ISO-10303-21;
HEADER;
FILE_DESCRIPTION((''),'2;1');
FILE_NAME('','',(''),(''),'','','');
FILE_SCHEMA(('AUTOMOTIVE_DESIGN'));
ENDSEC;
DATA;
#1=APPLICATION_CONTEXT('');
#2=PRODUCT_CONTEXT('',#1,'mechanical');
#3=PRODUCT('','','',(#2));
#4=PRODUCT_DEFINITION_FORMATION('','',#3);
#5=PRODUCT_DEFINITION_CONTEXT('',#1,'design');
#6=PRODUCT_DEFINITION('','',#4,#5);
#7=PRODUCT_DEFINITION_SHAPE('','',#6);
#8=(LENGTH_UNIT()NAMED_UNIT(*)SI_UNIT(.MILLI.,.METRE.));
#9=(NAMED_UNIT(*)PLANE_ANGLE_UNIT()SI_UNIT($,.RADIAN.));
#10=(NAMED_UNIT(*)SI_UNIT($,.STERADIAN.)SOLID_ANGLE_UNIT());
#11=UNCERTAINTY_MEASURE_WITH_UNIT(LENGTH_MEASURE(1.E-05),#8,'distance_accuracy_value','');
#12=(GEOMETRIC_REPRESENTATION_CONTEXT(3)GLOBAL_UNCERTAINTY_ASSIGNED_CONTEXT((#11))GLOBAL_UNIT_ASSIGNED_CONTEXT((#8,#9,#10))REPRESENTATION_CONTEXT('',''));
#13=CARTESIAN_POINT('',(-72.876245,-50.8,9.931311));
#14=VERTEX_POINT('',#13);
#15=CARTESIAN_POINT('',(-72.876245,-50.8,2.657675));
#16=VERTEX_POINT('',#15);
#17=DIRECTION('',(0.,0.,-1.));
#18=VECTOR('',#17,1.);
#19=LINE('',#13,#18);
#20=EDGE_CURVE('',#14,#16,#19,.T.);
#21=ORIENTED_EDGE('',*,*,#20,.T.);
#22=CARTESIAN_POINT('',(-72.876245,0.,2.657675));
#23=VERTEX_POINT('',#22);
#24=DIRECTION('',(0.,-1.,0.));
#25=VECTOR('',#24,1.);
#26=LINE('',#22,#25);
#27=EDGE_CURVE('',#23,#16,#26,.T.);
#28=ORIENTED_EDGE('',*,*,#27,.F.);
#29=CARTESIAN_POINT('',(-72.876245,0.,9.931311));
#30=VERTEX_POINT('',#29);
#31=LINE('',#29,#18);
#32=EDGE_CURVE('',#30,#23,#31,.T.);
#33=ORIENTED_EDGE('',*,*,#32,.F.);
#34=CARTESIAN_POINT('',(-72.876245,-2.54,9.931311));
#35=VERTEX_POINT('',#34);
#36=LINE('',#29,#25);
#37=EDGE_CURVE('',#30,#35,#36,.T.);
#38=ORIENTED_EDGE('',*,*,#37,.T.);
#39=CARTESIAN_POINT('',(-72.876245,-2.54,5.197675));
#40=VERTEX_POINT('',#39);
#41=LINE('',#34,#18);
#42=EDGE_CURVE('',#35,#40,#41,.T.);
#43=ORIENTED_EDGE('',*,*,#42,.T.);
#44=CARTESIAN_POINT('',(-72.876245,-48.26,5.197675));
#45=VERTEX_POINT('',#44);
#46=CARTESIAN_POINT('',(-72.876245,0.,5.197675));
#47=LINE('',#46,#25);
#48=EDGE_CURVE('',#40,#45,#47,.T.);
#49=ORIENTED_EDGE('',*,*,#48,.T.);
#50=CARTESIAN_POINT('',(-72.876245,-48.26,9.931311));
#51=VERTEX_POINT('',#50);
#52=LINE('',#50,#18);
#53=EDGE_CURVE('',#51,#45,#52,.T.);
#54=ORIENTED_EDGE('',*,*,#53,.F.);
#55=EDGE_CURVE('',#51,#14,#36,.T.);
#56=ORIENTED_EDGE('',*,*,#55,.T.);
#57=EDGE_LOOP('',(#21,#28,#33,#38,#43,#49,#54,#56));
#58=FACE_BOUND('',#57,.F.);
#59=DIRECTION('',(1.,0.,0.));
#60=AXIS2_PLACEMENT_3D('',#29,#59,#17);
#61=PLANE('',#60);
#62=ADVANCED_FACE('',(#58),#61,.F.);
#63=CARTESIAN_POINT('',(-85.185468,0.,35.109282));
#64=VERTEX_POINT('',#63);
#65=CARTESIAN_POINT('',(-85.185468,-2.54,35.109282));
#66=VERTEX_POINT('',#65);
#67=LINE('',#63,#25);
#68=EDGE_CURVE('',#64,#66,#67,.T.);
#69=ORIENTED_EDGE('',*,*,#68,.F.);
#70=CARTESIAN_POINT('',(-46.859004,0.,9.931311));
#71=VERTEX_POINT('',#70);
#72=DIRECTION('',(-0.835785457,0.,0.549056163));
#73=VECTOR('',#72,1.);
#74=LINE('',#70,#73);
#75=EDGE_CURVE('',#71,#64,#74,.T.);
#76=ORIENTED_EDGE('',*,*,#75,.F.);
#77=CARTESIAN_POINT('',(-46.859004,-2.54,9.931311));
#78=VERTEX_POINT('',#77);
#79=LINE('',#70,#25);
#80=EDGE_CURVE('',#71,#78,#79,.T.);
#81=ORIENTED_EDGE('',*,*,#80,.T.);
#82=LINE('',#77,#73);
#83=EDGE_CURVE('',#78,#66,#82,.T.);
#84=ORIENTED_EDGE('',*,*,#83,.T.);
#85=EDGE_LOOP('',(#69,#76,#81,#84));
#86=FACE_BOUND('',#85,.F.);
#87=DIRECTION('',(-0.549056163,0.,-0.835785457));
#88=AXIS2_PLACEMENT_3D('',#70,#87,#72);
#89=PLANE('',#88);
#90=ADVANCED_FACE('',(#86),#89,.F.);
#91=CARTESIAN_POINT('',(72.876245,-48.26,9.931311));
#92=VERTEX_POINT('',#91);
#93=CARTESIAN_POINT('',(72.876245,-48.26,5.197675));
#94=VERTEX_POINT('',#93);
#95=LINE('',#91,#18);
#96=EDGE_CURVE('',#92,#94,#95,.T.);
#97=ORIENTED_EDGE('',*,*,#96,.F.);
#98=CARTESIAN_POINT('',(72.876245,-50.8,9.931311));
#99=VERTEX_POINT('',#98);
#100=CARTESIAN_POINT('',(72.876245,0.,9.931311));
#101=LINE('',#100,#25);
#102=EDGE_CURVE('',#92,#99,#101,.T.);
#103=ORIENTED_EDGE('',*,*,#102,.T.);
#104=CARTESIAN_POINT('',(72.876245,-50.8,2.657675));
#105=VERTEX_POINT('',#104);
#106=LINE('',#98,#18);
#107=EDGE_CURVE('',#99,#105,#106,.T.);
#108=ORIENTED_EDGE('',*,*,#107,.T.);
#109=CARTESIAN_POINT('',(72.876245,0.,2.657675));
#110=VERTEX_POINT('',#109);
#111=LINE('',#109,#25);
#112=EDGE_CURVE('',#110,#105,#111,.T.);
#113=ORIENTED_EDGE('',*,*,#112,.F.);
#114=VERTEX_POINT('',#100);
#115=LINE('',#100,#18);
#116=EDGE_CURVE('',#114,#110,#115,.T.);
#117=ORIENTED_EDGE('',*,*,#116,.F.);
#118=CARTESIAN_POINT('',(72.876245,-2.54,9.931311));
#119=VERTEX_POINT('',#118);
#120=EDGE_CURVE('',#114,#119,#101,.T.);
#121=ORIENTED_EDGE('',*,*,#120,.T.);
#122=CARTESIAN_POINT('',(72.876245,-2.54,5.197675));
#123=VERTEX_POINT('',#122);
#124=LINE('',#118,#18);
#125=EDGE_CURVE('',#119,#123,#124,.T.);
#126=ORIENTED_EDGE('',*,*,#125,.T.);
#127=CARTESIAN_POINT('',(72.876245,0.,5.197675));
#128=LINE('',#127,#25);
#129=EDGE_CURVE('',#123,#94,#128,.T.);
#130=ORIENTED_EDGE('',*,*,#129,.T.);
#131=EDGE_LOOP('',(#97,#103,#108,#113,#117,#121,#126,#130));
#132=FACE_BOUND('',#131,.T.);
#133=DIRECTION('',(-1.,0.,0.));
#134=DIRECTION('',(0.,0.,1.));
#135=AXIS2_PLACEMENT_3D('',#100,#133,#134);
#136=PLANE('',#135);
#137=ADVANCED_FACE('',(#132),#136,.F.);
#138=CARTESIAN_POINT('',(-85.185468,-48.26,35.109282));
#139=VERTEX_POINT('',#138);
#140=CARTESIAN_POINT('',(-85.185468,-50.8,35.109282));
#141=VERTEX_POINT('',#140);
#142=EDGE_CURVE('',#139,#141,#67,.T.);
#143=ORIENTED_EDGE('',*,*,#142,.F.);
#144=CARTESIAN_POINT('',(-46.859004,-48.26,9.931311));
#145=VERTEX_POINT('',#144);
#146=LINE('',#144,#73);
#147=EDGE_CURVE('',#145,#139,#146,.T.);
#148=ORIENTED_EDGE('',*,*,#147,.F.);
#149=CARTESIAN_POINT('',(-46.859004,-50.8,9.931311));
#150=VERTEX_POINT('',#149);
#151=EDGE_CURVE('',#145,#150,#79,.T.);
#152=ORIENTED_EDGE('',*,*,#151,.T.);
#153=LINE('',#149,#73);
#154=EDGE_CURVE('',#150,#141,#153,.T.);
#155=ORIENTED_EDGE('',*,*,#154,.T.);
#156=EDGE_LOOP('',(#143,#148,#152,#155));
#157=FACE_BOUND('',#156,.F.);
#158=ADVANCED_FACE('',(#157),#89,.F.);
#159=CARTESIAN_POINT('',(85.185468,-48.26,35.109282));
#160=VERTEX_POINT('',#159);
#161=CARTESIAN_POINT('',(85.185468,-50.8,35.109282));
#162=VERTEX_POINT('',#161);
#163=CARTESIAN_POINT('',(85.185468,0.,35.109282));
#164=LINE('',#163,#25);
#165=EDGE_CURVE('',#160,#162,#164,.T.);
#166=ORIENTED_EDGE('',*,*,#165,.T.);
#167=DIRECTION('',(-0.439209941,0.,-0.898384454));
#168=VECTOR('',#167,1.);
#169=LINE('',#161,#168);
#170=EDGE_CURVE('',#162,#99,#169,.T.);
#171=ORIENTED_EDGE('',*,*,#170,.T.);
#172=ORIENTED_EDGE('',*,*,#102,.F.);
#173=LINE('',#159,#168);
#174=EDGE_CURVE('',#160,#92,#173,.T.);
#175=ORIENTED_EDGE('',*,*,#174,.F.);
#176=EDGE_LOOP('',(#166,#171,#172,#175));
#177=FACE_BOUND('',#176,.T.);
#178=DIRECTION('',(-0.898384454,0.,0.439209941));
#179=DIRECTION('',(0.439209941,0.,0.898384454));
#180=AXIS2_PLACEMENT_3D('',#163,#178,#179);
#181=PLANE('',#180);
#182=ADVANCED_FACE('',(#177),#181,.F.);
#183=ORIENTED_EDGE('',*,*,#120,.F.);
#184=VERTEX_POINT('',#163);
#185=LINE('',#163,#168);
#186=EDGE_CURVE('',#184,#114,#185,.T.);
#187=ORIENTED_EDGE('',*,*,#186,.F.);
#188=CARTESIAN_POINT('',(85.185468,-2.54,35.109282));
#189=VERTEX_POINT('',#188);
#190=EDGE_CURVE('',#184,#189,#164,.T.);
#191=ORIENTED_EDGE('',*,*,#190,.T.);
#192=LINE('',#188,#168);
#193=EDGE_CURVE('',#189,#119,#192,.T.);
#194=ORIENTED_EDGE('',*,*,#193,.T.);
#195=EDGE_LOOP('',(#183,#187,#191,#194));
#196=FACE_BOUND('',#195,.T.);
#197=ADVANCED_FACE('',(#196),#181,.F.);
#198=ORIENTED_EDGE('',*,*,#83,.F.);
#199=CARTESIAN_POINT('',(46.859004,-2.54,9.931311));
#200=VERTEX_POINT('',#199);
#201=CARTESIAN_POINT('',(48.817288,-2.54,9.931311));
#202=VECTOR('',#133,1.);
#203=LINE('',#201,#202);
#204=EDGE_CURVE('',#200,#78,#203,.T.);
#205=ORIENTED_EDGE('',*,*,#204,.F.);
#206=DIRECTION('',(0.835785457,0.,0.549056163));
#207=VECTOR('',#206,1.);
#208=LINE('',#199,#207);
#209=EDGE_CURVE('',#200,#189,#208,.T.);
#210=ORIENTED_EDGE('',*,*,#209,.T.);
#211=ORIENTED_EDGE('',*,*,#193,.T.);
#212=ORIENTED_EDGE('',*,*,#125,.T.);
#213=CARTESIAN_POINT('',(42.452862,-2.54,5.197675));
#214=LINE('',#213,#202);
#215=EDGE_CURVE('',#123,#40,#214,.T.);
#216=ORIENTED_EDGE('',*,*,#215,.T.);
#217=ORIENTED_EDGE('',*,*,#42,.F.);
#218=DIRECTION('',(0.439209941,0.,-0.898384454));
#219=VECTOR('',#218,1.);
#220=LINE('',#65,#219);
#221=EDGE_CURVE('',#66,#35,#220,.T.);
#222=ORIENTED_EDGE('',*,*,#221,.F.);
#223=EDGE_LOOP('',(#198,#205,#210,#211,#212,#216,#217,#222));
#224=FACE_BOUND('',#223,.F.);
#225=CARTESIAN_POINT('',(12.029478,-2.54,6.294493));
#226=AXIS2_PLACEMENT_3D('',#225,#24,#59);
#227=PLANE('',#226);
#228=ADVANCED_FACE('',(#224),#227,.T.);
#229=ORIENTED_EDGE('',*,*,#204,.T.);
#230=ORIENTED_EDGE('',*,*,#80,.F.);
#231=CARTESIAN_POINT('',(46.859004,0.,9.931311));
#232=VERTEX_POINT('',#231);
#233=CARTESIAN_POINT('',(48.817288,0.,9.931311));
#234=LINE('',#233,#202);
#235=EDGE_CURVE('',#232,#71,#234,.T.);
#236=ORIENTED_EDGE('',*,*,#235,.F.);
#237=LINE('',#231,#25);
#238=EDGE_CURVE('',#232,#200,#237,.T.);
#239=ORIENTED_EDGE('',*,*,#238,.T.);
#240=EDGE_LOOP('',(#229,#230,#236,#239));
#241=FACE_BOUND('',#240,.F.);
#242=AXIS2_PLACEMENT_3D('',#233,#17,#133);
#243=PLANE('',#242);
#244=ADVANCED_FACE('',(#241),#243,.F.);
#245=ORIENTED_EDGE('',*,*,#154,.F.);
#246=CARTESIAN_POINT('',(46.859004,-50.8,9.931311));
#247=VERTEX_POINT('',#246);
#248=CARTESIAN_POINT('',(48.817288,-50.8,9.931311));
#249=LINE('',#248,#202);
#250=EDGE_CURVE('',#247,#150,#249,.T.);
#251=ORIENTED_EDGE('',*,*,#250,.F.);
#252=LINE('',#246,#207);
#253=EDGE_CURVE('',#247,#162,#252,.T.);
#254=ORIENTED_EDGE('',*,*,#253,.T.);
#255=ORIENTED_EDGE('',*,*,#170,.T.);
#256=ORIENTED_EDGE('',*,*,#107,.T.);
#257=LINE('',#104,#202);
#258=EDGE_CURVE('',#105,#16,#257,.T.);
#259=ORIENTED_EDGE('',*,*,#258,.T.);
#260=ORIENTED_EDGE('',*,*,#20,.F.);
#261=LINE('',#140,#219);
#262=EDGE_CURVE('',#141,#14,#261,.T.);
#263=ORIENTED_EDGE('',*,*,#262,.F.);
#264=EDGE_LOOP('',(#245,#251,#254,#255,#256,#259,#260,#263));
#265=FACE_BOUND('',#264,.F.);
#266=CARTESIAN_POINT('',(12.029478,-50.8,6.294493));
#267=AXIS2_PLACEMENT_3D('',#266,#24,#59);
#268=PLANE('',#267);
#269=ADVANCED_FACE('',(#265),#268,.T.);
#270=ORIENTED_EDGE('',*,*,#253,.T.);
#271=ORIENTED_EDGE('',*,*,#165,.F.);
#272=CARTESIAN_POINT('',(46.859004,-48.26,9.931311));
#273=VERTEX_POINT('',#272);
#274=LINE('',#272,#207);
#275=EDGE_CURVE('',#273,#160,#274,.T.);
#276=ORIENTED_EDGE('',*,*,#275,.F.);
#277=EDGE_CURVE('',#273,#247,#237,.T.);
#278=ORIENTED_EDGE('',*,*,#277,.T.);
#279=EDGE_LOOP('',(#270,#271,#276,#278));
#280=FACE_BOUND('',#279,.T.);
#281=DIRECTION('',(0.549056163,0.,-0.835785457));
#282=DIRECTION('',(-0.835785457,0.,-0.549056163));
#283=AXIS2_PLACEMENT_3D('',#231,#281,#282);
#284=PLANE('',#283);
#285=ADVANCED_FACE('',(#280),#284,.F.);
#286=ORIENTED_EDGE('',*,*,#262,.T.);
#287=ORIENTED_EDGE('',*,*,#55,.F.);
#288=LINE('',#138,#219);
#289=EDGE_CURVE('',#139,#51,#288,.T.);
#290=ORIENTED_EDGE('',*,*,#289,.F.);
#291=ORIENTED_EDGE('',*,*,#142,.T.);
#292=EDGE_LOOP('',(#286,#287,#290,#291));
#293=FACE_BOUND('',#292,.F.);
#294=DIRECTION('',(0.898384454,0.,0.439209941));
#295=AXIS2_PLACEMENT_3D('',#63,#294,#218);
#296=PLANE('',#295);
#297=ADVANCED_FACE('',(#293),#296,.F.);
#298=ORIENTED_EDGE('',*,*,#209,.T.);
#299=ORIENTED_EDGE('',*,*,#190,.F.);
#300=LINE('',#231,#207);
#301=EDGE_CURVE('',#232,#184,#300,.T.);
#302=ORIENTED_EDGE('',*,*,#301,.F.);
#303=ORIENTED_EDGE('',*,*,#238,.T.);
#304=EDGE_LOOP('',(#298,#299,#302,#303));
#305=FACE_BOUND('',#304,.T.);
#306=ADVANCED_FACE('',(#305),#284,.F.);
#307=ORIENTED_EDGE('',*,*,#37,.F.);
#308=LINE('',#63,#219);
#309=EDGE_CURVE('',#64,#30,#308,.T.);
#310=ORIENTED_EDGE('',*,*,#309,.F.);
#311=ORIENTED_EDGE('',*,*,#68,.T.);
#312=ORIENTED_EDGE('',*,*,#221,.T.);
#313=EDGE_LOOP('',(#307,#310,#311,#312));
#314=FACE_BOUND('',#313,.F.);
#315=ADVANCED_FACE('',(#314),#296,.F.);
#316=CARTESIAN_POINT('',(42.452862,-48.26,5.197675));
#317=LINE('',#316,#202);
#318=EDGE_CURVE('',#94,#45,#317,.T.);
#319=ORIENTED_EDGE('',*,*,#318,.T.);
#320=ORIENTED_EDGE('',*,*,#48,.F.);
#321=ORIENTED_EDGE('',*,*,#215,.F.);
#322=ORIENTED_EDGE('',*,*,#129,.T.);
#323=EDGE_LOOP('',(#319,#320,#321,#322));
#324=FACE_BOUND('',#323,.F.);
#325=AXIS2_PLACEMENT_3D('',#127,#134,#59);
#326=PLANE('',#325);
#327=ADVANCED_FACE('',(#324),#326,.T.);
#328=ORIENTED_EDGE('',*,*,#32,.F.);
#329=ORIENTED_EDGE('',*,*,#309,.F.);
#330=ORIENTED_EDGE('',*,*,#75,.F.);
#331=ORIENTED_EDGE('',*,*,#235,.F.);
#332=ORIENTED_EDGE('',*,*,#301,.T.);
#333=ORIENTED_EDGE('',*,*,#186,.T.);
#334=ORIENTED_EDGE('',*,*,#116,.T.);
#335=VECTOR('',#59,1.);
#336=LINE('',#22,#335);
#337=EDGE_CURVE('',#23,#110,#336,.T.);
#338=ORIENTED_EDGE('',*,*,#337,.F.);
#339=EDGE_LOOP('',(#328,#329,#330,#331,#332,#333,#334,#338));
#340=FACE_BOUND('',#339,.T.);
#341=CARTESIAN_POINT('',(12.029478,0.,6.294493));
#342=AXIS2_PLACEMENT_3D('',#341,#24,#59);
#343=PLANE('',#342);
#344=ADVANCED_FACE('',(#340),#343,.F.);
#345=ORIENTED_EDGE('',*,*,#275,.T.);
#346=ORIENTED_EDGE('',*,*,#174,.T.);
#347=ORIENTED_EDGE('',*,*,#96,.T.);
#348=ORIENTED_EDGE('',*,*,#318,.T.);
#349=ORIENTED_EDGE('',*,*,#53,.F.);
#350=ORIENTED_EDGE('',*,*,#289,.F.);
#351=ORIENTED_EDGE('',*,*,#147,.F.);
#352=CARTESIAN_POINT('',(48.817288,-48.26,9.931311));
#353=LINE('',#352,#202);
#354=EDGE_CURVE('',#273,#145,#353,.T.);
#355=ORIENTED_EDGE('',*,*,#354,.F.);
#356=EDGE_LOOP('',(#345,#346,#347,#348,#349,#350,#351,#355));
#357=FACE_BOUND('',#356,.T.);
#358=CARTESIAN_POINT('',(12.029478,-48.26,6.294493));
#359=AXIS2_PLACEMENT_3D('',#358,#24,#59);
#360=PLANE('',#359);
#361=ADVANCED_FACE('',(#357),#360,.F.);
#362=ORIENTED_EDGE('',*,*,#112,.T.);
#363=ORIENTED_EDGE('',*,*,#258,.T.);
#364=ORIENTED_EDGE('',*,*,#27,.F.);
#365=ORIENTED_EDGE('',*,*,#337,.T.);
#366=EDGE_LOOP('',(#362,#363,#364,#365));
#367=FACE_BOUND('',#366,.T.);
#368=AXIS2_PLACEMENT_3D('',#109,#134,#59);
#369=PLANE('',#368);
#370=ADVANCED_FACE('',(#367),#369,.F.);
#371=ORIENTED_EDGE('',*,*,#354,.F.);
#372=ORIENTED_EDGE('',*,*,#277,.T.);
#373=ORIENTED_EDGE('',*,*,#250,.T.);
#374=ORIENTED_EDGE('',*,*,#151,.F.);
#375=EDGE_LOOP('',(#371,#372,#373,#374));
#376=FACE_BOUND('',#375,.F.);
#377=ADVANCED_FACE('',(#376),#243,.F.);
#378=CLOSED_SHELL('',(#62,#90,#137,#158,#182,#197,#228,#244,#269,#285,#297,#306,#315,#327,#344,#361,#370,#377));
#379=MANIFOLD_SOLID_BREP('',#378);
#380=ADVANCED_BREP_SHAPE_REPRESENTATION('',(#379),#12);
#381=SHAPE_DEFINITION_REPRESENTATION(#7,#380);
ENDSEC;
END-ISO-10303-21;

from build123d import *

# Parameters (mm, degrees)
F1_DEPTH = 50.8
F2_DEPTH = 50.8
F4_T     = -2.54


with BuildPart() as f1:
    # F0 (on Front) → F1 (new body)
    with BuildSketch(Plane.XZ):
        Polygon((-85.1854681969, 35.1092815399), (-72.8762447834, 9.9313110113), (-46.8590036035, 9.9313110113), align=None)
    extrude(amount=F1_DEPTH)

    # F0 (on Front) → F2 (join)
    with BuildSketch(Plane.XZ):
        Polygon((-46.8590036035, 9.9313110113), (-72.8762447834, 9.9313110113), (-72.8762447834, 2.6576747186), (48.8172881305, 2.6576747186), (48.8172881305, 9.9313110113), align=None)
    extrude(amount=F2_DEPTH)

    # F3: F1 across plane


with BuildPart() as f1_1:
    add(f1.part)
    add(f1.part.mirror(Plane.YZ))

    # F4
    f4_openings = [f1_1.faces().sort_by_distance(p)[0] for p in [
        (-66.022236, -25.4, 22.520296),
        (79.030856, -25.4, 22.520296),
        (66.022236, -25.4, 22.520296),
        (-79.030856, -25.4, 22.520296),
        (0, -25.4, 9.931311),
        (72.876245, -25.4, 6.294493),
        (-72.876245, -25.4, 6.294493),
    ]]
    offset(amount=F4_T, openings=f4_openings)


solid = f1_1.part
